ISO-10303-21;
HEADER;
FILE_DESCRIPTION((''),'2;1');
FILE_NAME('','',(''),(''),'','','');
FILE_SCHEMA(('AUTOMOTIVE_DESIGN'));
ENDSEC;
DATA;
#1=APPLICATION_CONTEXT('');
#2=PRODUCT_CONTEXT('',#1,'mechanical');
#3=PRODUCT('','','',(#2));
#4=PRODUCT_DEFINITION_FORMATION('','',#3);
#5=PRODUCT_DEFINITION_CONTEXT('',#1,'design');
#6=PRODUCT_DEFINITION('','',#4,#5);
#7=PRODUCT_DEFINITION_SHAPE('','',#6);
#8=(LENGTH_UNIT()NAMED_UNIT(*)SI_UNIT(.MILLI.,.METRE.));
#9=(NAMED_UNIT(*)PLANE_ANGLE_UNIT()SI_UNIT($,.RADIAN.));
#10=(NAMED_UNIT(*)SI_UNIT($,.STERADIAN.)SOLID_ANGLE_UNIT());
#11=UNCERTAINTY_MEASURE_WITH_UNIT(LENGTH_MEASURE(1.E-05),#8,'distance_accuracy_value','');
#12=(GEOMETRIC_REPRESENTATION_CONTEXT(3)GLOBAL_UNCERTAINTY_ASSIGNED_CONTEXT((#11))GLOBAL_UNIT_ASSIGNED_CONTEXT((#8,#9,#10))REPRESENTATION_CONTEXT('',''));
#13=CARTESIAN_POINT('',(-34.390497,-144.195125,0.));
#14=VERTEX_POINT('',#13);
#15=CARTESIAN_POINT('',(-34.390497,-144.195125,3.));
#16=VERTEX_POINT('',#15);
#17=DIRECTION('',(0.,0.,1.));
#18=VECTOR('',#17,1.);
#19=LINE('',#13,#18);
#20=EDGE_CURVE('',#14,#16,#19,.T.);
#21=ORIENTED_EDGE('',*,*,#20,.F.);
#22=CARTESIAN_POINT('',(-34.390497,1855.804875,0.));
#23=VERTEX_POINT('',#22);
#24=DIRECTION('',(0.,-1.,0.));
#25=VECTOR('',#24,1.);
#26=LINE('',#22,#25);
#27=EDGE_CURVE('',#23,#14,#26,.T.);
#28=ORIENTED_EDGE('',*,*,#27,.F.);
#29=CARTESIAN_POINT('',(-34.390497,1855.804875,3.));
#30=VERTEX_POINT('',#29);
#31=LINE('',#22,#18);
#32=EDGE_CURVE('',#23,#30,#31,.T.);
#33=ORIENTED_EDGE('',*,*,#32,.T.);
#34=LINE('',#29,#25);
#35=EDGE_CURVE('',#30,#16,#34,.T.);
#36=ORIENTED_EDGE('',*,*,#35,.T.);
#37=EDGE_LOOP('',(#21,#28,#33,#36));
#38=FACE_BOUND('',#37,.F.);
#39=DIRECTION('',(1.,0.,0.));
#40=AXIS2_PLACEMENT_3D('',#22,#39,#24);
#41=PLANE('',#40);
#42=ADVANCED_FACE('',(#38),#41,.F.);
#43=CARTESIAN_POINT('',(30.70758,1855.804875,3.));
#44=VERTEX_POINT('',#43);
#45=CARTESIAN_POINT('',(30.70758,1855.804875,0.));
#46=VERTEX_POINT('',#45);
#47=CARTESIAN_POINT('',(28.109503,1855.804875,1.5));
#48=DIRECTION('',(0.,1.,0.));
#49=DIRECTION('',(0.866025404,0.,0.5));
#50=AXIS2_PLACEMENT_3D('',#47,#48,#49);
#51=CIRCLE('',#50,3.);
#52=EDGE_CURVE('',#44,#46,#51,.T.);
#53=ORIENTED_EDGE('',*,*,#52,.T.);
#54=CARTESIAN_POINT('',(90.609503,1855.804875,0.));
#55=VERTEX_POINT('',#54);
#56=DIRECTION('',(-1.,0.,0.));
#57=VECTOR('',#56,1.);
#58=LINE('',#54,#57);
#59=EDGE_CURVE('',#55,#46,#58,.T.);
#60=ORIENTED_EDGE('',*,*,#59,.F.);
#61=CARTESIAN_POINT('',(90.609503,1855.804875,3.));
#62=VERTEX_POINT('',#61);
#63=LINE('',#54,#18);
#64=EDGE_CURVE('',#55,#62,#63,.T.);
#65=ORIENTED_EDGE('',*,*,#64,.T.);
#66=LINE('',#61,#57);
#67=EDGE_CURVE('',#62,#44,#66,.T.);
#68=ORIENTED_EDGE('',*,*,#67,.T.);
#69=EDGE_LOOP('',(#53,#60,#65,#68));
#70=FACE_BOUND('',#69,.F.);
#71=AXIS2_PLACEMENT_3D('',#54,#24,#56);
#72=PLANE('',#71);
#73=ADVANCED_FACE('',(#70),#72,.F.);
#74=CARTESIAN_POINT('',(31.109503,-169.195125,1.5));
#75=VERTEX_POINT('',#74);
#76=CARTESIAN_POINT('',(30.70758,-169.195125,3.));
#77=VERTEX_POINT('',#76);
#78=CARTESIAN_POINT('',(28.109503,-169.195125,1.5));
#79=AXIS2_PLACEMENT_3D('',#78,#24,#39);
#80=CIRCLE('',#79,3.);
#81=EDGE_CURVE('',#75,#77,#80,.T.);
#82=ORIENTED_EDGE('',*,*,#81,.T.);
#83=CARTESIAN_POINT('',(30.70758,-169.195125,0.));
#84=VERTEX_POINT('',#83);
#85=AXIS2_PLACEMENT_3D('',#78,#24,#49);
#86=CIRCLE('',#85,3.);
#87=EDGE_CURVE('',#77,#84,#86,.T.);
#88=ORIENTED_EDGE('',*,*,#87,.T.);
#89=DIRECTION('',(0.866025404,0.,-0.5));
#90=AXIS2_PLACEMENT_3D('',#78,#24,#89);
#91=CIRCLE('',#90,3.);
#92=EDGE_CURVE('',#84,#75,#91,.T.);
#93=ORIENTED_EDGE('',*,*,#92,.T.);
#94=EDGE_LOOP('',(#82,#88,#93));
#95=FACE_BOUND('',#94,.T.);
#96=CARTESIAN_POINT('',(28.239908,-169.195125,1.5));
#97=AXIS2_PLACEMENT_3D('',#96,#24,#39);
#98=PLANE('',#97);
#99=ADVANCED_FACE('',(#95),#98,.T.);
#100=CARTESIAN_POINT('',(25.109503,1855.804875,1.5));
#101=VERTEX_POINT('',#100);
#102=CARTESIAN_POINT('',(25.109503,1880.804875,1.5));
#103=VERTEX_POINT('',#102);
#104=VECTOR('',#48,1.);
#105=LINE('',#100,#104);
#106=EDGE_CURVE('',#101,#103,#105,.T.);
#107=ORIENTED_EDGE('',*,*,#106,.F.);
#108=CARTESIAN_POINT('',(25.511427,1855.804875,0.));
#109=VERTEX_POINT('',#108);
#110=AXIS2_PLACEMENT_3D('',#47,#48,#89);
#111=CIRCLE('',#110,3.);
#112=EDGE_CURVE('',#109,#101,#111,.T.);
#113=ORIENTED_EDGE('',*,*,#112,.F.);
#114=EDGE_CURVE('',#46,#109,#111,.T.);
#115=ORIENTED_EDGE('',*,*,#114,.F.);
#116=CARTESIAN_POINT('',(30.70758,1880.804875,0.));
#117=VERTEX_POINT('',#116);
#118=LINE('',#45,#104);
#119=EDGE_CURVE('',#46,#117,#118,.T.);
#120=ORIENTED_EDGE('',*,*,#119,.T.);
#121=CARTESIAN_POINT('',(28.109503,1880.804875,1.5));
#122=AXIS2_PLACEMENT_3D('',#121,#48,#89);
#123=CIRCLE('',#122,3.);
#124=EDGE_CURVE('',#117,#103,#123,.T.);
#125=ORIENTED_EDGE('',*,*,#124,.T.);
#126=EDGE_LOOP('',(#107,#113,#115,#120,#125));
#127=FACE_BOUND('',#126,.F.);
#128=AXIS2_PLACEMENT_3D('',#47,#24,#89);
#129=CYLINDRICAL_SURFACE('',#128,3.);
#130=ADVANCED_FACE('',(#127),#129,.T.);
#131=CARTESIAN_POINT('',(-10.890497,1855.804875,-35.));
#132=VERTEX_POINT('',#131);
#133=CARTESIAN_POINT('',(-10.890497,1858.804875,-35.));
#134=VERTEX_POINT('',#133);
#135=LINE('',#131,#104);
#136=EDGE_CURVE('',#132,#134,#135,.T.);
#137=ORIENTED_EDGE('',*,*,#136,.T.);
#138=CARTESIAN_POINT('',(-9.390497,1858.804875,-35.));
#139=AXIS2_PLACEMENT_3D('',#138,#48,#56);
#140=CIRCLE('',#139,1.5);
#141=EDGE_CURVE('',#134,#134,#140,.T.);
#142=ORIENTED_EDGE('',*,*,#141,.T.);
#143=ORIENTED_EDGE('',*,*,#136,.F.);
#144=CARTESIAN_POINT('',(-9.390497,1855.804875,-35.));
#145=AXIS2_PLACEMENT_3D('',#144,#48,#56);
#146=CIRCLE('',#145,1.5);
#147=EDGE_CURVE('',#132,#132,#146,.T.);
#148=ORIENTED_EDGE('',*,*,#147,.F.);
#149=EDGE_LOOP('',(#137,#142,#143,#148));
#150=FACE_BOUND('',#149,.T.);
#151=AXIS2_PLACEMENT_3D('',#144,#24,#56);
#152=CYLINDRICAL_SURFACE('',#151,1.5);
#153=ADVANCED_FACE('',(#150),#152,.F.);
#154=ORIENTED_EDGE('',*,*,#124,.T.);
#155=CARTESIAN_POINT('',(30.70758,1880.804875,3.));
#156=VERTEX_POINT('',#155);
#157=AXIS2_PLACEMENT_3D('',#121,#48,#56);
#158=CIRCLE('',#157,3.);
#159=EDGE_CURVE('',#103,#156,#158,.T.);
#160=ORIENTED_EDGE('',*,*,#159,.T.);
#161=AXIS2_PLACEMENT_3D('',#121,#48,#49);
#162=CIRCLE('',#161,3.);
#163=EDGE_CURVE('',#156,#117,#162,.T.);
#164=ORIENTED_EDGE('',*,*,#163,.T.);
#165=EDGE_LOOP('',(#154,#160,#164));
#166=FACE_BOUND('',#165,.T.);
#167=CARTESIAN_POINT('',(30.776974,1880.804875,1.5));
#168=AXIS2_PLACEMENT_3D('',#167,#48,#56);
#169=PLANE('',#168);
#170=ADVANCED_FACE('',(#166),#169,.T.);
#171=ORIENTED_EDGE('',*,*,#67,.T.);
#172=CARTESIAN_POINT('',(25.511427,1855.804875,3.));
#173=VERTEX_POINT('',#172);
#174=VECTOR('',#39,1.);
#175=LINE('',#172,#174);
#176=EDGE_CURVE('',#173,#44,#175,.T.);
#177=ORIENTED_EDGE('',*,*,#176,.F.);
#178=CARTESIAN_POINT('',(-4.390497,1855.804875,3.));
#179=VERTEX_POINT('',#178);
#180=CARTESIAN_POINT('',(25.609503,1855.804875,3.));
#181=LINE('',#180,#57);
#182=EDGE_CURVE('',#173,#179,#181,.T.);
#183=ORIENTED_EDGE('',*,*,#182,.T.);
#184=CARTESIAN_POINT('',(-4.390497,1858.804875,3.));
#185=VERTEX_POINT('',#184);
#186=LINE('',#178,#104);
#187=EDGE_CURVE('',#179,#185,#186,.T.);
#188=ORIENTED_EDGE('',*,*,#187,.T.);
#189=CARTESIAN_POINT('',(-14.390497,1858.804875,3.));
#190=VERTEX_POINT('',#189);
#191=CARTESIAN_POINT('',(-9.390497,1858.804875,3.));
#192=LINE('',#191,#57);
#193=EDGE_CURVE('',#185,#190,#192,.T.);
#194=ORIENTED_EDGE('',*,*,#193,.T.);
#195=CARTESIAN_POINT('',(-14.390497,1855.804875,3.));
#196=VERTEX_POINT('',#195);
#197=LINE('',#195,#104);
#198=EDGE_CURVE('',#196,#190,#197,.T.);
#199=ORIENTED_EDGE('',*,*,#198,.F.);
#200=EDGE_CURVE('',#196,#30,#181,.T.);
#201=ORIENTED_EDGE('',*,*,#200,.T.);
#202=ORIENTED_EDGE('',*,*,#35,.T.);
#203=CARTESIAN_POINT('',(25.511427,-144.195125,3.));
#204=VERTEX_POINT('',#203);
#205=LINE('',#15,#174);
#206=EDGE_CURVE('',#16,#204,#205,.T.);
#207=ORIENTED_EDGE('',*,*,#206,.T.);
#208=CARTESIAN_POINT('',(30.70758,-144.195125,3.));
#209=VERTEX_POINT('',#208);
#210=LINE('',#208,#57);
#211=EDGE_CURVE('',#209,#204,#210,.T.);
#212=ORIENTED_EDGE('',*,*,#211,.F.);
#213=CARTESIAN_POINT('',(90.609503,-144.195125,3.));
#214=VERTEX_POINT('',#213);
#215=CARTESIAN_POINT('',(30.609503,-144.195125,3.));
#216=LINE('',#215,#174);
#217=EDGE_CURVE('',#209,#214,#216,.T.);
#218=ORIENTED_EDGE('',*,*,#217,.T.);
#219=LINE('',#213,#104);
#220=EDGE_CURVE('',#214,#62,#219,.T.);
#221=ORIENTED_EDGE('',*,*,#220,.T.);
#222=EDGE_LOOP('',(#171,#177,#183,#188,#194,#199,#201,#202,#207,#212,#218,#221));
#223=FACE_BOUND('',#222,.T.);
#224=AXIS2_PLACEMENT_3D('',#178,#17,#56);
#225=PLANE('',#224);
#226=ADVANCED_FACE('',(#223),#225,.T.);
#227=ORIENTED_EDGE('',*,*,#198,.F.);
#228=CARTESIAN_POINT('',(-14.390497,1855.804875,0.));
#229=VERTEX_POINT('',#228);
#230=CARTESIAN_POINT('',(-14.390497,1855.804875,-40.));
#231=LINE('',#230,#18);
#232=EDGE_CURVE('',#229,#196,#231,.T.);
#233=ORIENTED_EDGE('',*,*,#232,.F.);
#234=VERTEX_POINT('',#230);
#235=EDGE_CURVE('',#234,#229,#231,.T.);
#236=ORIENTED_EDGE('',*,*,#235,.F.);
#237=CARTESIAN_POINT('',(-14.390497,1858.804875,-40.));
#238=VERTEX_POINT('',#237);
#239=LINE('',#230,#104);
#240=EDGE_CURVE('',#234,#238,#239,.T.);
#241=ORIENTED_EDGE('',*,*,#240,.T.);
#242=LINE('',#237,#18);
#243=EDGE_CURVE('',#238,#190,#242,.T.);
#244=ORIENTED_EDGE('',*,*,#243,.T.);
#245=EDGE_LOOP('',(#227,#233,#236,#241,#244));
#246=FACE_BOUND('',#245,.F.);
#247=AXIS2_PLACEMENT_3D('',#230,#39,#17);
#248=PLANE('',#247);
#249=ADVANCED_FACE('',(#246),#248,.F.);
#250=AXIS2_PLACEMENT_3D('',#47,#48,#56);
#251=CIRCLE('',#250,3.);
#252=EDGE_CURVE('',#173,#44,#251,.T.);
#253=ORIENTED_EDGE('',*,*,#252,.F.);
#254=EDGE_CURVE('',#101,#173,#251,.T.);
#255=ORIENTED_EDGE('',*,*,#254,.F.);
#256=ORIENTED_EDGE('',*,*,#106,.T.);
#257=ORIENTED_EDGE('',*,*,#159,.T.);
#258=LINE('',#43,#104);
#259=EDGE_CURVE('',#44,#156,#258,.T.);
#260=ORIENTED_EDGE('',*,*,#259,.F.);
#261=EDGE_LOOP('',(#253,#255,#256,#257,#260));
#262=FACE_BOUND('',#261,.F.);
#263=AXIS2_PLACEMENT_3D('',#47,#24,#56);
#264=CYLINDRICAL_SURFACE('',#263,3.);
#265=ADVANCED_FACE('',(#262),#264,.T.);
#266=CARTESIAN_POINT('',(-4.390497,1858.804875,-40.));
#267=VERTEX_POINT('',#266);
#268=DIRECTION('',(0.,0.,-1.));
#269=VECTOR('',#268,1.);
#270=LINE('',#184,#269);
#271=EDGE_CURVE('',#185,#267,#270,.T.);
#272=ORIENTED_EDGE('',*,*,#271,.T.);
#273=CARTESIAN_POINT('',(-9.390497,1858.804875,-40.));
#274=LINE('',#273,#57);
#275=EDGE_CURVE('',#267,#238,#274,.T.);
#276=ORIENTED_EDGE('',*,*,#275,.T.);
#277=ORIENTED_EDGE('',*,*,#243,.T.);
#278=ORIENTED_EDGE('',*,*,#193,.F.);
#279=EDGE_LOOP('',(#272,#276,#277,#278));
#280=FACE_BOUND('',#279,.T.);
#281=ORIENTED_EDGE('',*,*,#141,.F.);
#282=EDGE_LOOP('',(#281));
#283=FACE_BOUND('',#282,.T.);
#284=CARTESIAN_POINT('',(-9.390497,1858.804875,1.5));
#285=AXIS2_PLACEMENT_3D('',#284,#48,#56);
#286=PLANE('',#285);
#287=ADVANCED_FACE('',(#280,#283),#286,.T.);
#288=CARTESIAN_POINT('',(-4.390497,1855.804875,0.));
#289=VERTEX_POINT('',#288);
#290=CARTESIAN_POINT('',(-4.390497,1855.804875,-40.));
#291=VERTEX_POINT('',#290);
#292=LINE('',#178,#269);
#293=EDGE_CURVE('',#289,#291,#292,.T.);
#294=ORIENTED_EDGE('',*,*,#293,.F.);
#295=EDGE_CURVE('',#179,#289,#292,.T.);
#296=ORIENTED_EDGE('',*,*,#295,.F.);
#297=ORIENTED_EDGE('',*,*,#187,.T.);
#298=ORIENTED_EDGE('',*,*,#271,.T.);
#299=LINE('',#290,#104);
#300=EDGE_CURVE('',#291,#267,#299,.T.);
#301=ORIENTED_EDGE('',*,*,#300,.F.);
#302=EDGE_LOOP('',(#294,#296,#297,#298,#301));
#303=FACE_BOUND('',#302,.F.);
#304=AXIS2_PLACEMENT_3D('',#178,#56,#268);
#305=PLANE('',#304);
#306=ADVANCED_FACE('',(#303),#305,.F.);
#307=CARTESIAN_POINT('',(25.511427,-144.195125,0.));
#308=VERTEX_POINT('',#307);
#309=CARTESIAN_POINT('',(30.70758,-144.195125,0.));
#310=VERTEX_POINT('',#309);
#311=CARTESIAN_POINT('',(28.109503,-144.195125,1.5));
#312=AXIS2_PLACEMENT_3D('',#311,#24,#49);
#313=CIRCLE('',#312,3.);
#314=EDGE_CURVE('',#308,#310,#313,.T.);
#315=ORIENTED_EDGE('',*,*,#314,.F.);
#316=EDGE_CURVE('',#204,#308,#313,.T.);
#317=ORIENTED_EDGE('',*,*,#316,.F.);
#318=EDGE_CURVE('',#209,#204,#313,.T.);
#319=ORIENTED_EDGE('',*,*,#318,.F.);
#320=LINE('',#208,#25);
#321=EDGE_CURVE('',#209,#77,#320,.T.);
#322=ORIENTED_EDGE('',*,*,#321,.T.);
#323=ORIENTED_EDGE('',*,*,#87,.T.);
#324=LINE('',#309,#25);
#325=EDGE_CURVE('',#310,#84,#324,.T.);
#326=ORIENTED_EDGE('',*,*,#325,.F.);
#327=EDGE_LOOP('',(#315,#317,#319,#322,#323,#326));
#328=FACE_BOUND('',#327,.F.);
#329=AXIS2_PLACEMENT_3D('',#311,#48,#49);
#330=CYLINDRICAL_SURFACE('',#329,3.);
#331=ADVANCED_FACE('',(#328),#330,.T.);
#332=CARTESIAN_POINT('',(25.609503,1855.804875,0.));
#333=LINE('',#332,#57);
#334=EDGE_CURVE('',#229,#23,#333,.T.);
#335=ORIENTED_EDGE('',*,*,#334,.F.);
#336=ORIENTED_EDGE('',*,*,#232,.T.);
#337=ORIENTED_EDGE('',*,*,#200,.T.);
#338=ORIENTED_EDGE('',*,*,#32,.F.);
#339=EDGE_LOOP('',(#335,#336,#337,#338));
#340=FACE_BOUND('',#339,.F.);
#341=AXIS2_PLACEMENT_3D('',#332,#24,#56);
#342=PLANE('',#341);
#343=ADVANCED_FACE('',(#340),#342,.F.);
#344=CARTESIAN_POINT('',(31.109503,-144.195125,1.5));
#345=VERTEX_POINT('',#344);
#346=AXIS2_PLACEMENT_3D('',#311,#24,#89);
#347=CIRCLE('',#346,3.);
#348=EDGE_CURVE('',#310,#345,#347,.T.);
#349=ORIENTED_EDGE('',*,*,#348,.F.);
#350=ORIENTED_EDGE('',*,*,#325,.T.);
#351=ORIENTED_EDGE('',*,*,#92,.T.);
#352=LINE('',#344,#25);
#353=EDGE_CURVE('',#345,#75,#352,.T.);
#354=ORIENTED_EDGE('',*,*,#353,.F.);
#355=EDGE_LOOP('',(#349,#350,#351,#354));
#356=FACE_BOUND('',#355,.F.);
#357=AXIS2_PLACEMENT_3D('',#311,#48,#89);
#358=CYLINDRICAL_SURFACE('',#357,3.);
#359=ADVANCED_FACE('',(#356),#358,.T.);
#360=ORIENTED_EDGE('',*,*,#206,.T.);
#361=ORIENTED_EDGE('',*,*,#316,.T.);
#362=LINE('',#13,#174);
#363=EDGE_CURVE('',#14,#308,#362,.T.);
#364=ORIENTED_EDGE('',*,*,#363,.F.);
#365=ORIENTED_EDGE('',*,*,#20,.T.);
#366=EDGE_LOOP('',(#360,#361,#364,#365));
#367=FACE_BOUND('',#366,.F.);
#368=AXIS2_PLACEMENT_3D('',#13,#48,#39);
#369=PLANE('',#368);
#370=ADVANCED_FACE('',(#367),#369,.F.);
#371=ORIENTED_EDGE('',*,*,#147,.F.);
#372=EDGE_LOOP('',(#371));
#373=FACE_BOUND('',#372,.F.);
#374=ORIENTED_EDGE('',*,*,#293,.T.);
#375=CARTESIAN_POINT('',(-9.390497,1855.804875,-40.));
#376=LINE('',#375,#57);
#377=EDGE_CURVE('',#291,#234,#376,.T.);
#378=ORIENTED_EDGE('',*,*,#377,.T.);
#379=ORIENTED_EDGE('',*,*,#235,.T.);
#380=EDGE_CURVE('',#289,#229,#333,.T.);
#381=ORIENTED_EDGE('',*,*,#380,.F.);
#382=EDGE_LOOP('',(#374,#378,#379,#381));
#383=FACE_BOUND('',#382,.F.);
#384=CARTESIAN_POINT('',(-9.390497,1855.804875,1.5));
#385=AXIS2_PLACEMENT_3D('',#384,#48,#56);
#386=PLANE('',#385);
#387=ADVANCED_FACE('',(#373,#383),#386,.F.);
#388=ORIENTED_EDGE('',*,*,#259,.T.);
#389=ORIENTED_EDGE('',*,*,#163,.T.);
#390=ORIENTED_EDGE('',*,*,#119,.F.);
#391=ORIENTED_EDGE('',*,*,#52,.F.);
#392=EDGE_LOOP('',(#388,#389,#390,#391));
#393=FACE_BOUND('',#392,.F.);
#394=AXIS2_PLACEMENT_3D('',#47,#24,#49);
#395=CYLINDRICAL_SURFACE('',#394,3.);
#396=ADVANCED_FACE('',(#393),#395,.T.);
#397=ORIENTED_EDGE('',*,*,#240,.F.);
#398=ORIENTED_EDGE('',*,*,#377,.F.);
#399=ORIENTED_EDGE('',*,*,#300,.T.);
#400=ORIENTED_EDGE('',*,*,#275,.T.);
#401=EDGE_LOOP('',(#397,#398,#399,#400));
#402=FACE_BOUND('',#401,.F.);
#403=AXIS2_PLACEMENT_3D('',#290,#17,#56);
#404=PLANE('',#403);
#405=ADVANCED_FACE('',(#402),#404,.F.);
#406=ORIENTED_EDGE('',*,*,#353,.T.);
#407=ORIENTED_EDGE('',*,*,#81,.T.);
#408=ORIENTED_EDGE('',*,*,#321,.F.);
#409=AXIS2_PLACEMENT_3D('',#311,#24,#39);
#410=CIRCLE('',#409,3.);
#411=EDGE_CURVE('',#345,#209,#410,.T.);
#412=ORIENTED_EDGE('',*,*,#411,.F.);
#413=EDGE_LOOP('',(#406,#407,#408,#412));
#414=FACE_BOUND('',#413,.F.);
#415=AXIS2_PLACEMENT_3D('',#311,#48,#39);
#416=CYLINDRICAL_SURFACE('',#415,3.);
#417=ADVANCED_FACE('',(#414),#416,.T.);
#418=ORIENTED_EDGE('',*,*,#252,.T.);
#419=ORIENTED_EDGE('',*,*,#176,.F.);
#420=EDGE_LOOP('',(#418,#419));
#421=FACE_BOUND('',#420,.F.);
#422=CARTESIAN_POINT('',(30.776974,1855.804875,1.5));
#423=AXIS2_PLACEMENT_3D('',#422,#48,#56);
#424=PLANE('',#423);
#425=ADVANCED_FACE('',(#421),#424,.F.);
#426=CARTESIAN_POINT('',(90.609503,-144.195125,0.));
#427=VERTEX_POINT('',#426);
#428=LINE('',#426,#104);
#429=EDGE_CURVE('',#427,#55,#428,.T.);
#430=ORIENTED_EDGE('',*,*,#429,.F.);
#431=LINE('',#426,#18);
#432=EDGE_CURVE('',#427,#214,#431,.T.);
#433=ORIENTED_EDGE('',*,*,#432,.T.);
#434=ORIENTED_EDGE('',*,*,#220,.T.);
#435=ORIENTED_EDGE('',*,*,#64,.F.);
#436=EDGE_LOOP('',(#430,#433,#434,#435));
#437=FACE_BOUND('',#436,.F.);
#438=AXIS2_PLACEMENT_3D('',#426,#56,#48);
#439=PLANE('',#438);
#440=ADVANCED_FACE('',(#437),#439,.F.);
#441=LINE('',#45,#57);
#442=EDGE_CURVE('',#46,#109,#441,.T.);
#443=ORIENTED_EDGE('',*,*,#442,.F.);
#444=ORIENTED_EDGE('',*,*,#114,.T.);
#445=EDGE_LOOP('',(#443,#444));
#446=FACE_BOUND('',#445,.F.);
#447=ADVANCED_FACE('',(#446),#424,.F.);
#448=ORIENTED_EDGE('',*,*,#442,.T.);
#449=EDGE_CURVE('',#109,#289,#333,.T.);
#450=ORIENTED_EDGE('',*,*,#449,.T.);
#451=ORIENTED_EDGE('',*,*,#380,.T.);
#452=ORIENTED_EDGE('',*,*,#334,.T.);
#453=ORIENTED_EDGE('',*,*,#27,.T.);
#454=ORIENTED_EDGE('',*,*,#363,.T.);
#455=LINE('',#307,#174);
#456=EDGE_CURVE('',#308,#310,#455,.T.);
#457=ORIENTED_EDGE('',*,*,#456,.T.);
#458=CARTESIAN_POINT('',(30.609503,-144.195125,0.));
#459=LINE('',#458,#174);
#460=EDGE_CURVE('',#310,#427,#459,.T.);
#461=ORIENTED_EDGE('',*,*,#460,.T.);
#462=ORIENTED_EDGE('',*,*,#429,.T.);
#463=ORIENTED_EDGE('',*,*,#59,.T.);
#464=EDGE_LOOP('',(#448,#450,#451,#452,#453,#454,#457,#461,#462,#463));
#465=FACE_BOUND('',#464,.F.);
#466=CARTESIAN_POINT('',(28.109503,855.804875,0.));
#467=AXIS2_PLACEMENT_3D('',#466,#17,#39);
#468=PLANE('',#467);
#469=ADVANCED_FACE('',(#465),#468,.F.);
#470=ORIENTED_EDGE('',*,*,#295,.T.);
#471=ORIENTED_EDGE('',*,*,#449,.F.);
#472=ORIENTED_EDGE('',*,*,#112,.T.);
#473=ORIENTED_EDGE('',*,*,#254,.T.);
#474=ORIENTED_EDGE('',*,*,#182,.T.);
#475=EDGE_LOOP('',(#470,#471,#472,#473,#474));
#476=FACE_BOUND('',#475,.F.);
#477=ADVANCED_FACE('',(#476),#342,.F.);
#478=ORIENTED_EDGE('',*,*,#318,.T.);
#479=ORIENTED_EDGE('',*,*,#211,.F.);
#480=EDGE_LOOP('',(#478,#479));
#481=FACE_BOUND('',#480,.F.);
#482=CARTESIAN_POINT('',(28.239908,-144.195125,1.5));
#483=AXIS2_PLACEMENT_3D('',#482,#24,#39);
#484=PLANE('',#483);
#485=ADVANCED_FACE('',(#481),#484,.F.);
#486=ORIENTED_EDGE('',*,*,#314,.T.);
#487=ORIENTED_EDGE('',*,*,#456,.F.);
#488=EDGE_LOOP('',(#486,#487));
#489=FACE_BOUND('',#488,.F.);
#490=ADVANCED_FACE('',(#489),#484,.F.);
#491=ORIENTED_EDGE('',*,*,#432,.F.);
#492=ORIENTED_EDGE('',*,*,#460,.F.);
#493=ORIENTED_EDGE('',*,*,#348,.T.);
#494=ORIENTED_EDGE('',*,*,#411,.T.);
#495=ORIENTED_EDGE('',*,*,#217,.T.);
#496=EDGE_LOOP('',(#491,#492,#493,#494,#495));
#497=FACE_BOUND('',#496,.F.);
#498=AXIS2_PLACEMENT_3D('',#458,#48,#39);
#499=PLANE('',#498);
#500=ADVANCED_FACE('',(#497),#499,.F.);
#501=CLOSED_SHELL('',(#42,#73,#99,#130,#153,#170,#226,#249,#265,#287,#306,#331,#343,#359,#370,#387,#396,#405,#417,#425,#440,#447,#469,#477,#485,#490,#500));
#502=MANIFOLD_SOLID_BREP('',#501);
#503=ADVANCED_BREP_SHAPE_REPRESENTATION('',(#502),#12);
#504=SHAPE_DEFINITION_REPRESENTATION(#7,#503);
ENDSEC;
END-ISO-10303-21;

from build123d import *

# Parameters (mm, degrees)
F1_DEPTH = 3
F2_W     = 10
F2_H     = 3
F2_H_2   = 40
F2_R     = 1.5
F3_DEPTH = 3
F5_DEPTH = 25
F7_DEPTH = 25


# Not quite as in the source:
# - a feature names something its author has since deleted; it is built from what else it names


with BuildPart() as f1:
    # F0 (on Top) → F1 (new body)
    with BuildSketch(Plane.XY):
        Polygon((25.6095033884, 1855.804875493), (-34.3904966116, 1855.804875493), (-34.3904966116, -144.195124507), (25.6095033884, -144.195124507), (25.6095033884, -164.195124507), (30.6095033884, -164.195124507), (30.6095033884, -144.195124507), (90.6095033884, -144.195124507), (90.6095033884, 1855.804875493), (30.6095033884, 1855.804875493), (30.6095033884, 1875.804875493), (25.6095033884, 1875.804875493), align=None)
    extrude(amount=F1_DEPTH)

    # F2 (on face) → F3 (join)
    with BuildSketch(Plane(origin=(0, 1855.804875493, 0), x_dir=(-1, 0, 0), z_dir=(0, 1, 0))):
        with Locations((9.3904966116, 1.5)):
            Rectangle(F2_W, F2_H)
        with Locations((9.3904966116, -20)):
            Rectangle(F2_W, F2_H_2)
        with Locations((9.3904966116, -35)):
            Circle(F2_R, mode=Mode.SUBTRACT)
    extrude(amount=F3_DEPTH)

    # F4 (on face) → F5 (join)
    with BuildSketch(Plane.XZ.offset(144.195124507)):
        with BuildLine():
            Line((30.6095033884, 3), (30.7075795998, 3))
            ThreePointArc((30.7075795998, 3), (25.1095033884, 1.5), (30.7075795998, 0))
            Line((30.7075795998, 0), (30.6095033884, 0))
            Line((30.6095033884, 0), (30.6095033884, 3))
        make_face()
        with BuildLine():
            ThreePointArc((30.7075795998, 0), (31.0072808673, 0.7235428647), (31.1095033884, 1.5))
            ThreePointArc((31.1095033884, 1.5), (31.0072808673, 2.2764571353), (30.7075795998, 3))
            Line((30.7075795998, 3), (30.6095033884, 3))
            Line((30.6095033884, 3), (30.6095033884, 0))
            Line((30.6095033884, 0), (30.7075795998, 0))
        make_face()
    extrude(amount=F5_DEPTH)

    # F6 (on face) → F7 (join)
    with BuildSketch(Plane(origin=(0, 1855.804875493, 0), x_dir=(-1, 0, 0), z_dir=(0, 1, 0))):
        with BuildLine():
            Line((-30.6095033884, 3), (-30.7075795998, 3))
            ThreePointArc((-30.7075795998, 3), (-31.1095033884, 1.5), (-30.7075795998, 0))
            Line((-30.7075795998, 0), (-30.6095033884, 0))
            Line((-30.6095033884, 0), (-30.6095033884, 3))
        make_face()
        with BuildLine():
            ThreePointArc((-30.7075795998, 0), (-27.3330462531, -1.3977774789), (-25.1095033884, 1.5))
            ThreePointArc((-25.1095033884, 1.5), (-27.3330462531, 4.3977774789), (-30.7075795998, 3))
            Line((-30.7075795998, 3), (-30.6095033884, 3))
            Line((-30.6095033884, 3), (-30.6095033884, 0))
            Line((-30.6095033884, 0), (-30.7075795998, 0))
        make_face()
    extrude(amount=F7_DEPTH)


solid = f1.part
